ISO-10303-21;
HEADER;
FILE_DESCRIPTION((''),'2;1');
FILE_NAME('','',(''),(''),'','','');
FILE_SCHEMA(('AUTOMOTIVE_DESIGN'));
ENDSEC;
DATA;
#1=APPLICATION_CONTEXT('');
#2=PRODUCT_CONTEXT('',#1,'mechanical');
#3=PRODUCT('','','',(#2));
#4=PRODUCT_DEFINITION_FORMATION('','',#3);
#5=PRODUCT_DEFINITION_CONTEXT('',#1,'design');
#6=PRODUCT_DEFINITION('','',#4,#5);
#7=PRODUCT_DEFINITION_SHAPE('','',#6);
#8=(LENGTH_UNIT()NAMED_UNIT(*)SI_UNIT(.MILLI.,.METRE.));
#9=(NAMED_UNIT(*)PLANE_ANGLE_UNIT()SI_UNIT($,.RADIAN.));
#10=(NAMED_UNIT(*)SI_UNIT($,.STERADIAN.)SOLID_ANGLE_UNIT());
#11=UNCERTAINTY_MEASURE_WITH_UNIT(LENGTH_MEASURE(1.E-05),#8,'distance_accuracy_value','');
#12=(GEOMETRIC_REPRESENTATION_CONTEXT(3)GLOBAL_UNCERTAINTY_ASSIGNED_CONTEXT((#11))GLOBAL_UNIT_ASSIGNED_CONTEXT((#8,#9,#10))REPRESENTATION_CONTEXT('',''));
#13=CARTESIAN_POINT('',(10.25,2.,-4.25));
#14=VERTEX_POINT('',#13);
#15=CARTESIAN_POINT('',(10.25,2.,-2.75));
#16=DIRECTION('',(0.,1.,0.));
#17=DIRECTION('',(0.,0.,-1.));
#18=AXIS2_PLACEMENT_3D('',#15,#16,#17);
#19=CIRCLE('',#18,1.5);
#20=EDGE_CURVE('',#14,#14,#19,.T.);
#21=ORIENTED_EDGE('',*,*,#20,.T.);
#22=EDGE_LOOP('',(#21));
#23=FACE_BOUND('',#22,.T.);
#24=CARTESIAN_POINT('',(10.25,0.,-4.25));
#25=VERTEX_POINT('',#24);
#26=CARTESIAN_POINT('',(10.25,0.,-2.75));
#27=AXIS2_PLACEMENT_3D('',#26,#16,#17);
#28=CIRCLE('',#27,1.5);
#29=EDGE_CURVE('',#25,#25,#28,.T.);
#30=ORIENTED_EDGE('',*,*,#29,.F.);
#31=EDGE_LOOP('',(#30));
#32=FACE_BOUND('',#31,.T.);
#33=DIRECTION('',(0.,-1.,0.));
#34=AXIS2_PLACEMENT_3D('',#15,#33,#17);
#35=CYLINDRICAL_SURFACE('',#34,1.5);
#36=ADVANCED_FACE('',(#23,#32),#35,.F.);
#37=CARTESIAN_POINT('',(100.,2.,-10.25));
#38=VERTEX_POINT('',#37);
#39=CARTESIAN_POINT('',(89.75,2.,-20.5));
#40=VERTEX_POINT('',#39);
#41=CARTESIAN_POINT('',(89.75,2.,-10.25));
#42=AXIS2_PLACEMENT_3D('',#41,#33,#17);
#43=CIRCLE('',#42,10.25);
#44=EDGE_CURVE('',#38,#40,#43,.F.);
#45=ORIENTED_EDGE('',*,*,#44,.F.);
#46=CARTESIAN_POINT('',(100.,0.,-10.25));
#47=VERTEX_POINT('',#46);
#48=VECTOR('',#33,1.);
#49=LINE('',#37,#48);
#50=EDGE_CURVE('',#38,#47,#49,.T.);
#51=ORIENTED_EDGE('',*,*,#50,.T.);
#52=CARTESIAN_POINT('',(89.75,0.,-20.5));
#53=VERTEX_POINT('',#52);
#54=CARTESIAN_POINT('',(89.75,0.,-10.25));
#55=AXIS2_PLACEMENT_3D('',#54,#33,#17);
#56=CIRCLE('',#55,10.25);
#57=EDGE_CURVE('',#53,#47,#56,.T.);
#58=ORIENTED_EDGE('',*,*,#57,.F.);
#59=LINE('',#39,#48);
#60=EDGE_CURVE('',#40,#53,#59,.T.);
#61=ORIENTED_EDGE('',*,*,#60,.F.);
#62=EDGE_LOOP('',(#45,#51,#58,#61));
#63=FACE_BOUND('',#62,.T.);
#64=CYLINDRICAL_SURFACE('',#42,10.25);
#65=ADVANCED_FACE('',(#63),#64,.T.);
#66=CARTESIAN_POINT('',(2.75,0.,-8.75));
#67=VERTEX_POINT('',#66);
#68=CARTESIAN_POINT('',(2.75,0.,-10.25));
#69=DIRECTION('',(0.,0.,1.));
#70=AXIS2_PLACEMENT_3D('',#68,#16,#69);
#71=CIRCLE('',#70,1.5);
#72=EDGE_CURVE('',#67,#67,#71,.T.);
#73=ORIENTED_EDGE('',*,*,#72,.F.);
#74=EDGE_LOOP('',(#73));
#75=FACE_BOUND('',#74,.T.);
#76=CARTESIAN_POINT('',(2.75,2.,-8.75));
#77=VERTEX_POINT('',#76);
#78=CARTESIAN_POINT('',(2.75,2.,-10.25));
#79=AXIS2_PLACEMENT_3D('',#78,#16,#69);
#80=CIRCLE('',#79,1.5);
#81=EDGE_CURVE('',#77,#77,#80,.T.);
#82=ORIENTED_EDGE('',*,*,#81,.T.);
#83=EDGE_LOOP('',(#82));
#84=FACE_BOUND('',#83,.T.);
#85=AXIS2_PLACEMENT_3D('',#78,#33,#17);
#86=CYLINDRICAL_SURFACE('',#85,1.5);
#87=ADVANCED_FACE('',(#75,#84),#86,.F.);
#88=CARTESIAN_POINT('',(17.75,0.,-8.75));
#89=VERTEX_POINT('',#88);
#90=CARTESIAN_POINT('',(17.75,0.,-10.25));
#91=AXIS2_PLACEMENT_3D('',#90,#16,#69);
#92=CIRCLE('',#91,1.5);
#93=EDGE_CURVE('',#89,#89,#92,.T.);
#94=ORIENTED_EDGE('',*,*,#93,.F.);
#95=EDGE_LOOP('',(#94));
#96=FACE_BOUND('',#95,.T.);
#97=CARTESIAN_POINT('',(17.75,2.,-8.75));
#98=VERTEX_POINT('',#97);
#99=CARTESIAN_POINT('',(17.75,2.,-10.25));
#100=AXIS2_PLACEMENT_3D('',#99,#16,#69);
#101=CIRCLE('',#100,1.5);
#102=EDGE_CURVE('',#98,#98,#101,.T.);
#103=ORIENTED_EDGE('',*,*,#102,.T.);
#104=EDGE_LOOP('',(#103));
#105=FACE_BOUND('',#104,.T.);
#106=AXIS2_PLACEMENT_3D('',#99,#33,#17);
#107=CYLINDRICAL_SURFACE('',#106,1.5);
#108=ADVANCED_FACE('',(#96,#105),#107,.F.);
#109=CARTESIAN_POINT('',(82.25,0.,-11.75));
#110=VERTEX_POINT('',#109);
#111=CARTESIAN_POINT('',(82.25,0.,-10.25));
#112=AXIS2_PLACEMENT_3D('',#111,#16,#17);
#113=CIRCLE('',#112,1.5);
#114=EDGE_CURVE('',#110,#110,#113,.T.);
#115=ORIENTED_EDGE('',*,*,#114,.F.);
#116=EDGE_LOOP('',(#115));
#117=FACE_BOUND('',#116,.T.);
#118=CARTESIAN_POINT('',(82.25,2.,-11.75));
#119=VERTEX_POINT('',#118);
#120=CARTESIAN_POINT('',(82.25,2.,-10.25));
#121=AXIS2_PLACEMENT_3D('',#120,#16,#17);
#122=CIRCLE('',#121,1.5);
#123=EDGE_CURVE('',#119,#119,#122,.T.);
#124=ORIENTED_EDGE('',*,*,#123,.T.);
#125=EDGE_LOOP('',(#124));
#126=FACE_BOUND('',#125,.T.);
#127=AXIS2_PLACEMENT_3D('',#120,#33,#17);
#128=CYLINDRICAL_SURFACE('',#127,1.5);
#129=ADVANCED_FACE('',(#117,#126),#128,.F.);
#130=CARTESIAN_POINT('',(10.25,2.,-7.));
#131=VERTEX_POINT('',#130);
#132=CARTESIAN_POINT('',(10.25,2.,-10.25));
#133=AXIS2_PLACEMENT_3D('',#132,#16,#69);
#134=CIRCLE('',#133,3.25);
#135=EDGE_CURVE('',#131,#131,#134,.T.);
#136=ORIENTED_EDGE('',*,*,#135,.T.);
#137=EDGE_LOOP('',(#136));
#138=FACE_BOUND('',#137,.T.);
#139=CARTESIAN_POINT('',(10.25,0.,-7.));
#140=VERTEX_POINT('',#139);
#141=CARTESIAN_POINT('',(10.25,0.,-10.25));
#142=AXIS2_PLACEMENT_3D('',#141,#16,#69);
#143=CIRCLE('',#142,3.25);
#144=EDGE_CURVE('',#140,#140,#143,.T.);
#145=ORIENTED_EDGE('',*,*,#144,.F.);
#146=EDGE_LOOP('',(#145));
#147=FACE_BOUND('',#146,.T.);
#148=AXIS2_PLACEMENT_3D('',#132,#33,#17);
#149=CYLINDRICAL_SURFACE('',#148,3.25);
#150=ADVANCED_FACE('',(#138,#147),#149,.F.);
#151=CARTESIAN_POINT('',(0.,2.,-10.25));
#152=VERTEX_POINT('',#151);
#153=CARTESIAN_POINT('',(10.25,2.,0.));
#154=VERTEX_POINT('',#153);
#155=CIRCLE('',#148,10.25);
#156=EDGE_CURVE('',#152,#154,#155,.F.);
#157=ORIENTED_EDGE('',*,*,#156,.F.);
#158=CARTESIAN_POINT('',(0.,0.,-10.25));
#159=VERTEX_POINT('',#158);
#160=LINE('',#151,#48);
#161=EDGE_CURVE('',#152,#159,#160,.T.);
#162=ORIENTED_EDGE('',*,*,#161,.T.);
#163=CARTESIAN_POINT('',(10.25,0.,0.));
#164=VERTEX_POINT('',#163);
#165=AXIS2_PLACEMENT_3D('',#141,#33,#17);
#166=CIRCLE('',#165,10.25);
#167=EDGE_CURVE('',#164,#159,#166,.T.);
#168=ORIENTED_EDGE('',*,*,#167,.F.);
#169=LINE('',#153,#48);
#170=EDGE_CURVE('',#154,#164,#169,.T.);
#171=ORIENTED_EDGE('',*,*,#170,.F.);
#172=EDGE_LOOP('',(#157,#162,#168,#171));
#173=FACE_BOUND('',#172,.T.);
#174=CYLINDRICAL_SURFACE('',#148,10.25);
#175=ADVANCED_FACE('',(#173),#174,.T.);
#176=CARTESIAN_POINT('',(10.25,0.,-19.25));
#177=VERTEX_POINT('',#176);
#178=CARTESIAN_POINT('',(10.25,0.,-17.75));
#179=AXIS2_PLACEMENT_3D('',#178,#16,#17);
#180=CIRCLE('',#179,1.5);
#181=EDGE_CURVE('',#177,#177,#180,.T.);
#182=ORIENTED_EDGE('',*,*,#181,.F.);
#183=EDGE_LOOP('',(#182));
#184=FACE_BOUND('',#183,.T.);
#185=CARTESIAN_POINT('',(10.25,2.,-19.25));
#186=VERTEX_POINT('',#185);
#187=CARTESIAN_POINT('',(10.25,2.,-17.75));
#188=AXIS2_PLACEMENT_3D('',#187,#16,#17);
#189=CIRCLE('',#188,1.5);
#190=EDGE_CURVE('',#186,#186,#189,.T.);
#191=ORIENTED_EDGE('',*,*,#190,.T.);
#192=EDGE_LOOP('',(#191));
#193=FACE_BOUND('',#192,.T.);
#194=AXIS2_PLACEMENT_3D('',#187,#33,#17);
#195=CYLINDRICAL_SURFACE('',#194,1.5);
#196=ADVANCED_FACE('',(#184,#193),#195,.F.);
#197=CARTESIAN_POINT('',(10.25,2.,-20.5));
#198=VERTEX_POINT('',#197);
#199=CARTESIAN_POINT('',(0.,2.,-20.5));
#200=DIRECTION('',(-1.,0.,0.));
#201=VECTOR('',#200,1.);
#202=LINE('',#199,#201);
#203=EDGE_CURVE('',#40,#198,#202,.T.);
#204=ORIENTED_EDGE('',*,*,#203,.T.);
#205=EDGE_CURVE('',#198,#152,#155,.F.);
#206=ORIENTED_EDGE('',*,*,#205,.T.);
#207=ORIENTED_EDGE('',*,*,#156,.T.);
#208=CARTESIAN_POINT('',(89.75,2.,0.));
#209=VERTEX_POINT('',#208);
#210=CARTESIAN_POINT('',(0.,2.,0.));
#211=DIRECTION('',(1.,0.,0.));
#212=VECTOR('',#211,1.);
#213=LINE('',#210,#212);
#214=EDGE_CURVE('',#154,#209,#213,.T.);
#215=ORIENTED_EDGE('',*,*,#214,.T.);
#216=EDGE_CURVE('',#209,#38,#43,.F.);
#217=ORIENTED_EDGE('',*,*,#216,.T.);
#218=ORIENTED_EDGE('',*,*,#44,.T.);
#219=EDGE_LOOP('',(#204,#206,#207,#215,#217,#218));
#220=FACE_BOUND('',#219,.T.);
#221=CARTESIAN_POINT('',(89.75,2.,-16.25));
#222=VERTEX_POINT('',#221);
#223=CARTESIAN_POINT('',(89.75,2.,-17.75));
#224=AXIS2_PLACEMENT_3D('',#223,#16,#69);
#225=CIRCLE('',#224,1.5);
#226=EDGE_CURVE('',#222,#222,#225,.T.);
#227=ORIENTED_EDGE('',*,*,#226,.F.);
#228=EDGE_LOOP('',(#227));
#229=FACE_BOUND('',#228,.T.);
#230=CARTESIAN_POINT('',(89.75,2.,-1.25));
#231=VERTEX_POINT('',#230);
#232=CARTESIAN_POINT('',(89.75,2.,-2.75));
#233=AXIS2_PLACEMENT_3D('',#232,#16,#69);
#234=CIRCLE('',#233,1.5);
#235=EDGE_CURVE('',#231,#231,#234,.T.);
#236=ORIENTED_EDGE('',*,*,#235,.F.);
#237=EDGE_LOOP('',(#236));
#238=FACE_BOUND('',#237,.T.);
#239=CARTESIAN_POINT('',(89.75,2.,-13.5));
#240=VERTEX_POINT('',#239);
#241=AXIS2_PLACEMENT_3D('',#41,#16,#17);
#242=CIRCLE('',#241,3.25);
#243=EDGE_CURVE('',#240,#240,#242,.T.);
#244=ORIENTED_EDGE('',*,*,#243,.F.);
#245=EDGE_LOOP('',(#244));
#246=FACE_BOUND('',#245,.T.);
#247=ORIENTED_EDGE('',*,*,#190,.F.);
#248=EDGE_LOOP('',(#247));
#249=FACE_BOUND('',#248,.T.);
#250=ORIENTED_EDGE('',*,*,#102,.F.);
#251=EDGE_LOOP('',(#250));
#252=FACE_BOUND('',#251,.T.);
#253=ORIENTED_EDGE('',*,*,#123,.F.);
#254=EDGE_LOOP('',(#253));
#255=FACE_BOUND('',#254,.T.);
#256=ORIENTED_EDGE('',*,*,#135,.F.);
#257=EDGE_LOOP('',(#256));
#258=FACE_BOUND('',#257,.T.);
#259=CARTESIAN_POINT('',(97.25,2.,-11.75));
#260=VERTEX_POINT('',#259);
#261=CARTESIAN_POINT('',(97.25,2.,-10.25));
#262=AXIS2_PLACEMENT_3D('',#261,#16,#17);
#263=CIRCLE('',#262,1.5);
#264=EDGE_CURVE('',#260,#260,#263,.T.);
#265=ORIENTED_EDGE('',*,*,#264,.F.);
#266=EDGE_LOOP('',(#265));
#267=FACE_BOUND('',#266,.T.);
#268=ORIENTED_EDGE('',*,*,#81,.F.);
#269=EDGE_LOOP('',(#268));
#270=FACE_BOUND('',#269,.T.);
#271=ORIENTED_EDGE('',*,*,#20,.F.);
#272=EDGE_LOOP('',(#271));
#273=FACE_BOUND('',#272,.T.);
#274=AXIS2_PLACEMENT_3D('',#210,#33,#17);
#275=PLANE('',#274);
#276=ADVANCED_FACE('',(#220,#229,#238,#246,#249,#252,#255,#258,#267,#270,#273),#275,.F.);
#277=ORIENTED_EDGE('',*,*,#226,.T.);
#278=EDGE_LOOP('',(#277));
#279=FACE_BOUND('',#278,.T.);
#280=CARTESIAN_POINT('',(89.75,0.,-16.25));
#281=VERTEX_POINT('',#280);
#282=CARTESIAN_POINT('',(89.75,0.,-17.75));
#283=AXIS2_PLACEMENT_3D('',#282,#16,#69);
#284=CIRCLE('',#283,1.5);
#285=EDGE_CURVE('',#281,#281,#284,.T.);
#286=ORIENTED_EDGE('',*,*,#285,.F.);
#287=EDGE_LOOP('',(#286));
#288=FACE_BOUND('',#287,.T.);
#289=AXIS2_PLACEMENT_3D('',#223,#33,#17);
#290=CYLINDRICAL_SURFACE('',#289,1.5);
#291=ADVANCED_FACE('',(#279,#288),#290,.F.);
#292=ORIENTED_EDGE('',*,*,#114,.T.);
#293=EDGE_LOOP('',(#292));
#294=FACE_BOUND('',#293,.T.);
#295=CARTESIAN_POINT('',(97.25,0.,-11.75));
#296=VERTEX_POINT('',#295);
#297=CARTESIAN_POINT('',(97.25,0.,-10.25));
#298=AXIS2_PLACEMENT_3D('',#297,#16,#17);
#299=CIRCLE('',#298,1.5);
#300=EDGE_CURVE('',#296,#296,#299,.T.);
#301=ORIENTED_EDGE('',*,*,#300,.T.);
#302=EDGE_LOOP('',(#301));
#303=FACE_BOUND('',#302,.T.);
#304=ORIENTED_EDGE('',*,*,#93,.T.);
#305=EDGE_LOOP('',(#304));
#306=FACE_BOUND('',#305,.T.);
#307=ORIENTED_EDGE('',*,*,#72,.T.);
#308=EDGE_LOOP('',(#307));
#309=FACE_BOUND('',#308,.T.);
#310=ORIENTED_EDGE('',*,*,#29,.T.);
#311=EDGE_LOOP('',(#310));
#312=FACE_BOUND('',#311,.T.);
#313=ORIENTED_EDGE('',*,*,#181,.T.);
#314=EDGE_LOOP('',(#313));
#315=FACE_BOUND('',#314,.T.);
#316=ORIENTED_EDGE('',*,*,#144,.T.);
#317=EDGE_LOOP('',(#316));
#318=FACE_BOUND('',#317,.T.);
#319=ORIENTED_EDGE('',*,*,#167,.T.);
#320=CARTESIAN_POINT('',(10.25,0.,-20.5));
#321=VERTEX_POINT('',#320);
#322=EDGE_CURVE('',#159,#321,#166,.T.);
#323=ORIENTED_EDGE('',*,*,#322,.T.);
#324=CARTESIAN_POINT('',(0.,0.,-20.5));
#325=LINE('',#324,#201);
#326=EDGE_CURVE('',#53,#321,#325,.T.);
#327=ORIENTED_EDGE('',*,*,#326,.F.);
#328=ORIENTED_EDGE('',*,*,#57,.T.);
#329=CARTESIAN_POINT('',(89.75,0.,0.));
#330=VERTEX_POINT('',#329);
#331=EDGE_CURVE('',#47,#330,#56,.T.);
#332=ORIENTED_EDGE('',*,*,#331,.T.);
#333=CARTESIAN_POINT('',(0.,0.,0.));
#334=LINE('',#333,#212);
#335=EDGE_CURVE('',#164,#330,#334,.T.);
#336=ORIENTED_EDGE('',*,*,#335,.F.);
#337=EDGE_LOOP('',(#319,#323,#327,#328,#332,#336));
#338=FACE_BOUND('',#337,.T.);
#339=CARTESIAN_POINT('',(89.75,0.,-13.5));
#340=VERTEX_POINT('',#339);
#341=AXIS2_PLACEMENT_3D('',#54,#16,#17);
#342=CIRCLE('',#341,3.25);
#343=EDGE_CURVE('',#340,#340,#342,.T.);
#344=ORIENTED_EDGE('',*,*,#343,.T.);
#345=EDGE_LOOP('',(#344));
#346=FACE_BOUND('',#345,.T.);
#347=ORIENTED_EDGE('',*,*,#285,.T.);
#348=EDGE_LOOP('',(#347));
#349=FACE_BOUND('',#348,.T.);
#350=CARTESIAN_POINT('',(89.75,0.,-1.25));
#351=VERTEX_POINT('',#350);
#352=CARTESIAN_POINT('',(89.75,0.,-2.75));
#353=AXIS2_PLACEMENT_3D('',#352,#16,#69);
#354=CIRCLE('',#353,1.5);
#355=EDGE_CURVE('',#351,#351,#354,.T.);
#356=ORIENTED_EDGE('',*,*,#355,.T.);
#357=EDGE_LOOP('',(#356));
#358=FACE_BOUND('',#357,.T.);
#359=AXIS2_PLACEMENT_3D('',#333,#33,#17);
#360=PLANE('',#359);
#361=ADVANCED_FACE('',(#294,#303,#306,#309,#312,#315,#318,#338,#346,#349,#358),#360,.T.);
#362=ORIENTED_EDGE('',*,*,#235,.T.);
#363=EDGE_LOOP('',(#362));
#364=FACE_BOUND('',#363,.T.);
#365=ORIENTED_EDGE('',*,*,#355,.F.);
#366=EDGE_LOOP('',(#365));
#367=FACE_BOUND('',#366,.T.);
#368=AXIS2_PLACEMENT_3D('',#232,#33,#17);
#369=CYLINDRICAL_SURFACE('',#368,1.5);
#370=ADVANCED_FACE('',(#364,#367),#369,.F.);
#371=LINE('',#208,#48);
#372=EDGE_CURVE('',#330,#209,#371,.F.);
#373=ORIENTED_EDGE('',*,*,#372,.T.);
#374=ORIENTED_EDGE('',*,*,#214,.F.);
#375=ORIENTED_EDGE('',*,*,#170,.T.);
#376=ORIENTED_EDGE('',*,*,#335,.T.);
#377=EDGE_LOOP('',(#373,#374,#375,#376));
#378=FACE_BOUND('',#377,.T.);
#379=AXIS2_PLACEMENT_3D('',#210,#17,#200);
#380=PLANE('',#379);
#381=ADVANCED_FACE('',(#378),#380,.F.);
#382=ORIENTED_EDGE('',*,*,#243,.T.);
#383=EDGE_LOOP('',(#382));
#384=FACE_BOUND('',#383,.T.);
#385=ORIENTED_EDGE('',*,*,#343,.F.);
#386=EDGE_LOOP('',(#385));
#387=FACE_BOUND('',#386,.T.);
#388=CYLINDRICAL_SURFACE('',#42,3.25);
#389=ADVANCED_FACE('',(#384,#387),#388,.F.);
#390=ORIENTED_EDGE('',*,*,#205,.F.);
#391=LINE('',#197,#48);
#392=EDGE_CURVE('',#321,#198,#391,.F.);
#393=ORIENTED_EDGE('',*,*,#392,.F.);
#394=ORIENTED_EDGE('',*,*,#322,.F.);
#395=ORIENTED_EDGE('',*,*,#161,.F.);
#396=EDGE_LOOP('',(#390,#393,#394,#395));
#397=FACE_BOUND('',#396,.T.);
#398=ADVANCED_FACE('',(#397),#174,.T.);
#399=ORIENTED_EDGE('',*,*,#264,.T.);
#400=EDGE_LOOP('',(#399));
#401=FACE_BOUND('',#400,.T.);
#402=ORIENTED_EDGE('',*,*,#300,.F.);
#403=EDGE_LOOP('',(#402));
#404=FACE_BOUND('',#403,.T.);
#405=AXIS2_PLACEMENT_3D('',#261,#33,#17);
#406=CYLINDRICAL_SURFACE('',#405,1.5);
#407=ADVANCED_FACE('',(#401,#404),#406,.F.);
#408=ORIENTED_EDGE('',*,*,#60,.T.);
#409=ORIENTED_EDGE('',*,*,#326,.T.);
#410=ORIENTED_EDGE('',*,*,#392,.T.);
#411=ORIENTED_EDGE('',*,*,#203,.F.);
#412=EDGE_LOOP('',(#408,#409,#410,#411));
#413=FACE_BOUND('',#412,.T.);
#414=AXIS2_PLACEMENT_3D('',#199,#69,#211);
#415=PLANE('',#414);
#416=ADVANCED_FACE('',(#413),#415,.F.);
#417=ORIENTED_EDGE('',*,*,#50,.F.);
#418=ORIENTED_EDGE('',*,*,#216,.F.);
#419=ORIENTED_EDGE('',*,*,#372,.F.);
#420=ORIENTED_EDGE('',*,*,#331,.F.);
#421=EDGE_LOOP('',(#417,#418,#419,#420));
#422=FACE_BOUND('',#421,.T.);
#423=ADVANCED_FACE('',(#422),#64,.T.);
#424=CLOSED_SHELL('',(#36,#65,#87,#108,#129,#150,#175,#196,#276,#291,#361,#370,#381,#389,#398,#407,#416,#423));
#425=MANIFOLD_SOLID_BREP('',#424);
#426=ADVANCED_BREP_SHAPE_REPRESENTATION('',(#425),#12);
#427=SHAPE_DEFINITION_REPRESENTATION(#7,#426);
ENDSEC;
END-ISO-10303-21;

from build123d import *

# Parameters (mm, degrees)
SKETCH1_W           = 100
SKETCH1_H           = 20.5
SKETCH1_R           = 3.25
SKETCH1_R_2         = 1.5
BOSS_EXTRUDE1_DEPTH = 2
FILLET1_R           = 10.25


with BuildPart() as part:
    # Sketch1 → Boss-Extrude1 (new body)
    with BuildSketch(Plane(origin=(0, 0, 0), x_dir=(1, 0, 0), z_dir=(0, 1, 0))):
        with Locations((50, 10.25)):
            Rectangle(SKETCH1_W, SKETCH1_H)
        with Locations(Location((10.25, 10.25, 0), (0, 0, 270))):
            Circle(SKETCH1_R, mode=Mode.SUBTRACT)
        with Locations(Location((17.75, 10.25, 0), (0, 0, 270))):
            Circle(SKETCH1_R_2, mode=Mode.SUBTRACT)
        with Locations(Location((10.25, 17.75, 0), (0, 0, 90))):
            Circle(SKETCH1_R_2, mode=Mode.SUBTRACT)
        with Locations(Location((10.25, 2.75, 0), (0, 0, 90))):
            Circle(SKETCH1_R_2, mode=Mode.SUBTRACT)
        with Locations(Location((2.75, 10.25, 0), (0, 0, 270))):
            Circle(SKETCH1_R_2, mode=Mode.SUBTRACT)
        with Locations(Location((82.25, 10.25, 0), (0, 0, 90))):
            Circle(SKETCH1_R_2, mode=Mode.SUBTRACT)
        with Locations(Location((89.75, 17.75, 0), (0, 0, 270))):
            Circle(SKETCH1_R_2, mode=Mode.SUBTRACT)
        with Locations(Location((89.75, 2.75, 0), (0, 0, 270))):
            Circle(SKETCH1_R_2, mode=Mode.SUBTRACT)
        with Locations(Location((97.25, 10.25, 0), (0, 0, 90))):
            Circle(SKETCH1_R_2, mode=Mode.SUBTRACT)
        with Locations(Location((89.75, 10.25, 0), (0, 0, 90))):
            Circle(SKETCH1_R, mode=Mode.SUBTRACT)
    extrude(amount=BOSS_EXTRUDE1_DEPTH)

    # Fillet1
    fillet1_edges = [part.edges().sort_by_distance(p)[0] for p in [
        (0, 1, 0),
        (0, 1, -20.5),
        (100, 1, -20.5),
        (100, 1, 0),
    ]]
    fillet(fillet1_edges, radius=FILLET1_R - 0.0001)  # a hair under: the kernel refuses the full size


solid = part.part
